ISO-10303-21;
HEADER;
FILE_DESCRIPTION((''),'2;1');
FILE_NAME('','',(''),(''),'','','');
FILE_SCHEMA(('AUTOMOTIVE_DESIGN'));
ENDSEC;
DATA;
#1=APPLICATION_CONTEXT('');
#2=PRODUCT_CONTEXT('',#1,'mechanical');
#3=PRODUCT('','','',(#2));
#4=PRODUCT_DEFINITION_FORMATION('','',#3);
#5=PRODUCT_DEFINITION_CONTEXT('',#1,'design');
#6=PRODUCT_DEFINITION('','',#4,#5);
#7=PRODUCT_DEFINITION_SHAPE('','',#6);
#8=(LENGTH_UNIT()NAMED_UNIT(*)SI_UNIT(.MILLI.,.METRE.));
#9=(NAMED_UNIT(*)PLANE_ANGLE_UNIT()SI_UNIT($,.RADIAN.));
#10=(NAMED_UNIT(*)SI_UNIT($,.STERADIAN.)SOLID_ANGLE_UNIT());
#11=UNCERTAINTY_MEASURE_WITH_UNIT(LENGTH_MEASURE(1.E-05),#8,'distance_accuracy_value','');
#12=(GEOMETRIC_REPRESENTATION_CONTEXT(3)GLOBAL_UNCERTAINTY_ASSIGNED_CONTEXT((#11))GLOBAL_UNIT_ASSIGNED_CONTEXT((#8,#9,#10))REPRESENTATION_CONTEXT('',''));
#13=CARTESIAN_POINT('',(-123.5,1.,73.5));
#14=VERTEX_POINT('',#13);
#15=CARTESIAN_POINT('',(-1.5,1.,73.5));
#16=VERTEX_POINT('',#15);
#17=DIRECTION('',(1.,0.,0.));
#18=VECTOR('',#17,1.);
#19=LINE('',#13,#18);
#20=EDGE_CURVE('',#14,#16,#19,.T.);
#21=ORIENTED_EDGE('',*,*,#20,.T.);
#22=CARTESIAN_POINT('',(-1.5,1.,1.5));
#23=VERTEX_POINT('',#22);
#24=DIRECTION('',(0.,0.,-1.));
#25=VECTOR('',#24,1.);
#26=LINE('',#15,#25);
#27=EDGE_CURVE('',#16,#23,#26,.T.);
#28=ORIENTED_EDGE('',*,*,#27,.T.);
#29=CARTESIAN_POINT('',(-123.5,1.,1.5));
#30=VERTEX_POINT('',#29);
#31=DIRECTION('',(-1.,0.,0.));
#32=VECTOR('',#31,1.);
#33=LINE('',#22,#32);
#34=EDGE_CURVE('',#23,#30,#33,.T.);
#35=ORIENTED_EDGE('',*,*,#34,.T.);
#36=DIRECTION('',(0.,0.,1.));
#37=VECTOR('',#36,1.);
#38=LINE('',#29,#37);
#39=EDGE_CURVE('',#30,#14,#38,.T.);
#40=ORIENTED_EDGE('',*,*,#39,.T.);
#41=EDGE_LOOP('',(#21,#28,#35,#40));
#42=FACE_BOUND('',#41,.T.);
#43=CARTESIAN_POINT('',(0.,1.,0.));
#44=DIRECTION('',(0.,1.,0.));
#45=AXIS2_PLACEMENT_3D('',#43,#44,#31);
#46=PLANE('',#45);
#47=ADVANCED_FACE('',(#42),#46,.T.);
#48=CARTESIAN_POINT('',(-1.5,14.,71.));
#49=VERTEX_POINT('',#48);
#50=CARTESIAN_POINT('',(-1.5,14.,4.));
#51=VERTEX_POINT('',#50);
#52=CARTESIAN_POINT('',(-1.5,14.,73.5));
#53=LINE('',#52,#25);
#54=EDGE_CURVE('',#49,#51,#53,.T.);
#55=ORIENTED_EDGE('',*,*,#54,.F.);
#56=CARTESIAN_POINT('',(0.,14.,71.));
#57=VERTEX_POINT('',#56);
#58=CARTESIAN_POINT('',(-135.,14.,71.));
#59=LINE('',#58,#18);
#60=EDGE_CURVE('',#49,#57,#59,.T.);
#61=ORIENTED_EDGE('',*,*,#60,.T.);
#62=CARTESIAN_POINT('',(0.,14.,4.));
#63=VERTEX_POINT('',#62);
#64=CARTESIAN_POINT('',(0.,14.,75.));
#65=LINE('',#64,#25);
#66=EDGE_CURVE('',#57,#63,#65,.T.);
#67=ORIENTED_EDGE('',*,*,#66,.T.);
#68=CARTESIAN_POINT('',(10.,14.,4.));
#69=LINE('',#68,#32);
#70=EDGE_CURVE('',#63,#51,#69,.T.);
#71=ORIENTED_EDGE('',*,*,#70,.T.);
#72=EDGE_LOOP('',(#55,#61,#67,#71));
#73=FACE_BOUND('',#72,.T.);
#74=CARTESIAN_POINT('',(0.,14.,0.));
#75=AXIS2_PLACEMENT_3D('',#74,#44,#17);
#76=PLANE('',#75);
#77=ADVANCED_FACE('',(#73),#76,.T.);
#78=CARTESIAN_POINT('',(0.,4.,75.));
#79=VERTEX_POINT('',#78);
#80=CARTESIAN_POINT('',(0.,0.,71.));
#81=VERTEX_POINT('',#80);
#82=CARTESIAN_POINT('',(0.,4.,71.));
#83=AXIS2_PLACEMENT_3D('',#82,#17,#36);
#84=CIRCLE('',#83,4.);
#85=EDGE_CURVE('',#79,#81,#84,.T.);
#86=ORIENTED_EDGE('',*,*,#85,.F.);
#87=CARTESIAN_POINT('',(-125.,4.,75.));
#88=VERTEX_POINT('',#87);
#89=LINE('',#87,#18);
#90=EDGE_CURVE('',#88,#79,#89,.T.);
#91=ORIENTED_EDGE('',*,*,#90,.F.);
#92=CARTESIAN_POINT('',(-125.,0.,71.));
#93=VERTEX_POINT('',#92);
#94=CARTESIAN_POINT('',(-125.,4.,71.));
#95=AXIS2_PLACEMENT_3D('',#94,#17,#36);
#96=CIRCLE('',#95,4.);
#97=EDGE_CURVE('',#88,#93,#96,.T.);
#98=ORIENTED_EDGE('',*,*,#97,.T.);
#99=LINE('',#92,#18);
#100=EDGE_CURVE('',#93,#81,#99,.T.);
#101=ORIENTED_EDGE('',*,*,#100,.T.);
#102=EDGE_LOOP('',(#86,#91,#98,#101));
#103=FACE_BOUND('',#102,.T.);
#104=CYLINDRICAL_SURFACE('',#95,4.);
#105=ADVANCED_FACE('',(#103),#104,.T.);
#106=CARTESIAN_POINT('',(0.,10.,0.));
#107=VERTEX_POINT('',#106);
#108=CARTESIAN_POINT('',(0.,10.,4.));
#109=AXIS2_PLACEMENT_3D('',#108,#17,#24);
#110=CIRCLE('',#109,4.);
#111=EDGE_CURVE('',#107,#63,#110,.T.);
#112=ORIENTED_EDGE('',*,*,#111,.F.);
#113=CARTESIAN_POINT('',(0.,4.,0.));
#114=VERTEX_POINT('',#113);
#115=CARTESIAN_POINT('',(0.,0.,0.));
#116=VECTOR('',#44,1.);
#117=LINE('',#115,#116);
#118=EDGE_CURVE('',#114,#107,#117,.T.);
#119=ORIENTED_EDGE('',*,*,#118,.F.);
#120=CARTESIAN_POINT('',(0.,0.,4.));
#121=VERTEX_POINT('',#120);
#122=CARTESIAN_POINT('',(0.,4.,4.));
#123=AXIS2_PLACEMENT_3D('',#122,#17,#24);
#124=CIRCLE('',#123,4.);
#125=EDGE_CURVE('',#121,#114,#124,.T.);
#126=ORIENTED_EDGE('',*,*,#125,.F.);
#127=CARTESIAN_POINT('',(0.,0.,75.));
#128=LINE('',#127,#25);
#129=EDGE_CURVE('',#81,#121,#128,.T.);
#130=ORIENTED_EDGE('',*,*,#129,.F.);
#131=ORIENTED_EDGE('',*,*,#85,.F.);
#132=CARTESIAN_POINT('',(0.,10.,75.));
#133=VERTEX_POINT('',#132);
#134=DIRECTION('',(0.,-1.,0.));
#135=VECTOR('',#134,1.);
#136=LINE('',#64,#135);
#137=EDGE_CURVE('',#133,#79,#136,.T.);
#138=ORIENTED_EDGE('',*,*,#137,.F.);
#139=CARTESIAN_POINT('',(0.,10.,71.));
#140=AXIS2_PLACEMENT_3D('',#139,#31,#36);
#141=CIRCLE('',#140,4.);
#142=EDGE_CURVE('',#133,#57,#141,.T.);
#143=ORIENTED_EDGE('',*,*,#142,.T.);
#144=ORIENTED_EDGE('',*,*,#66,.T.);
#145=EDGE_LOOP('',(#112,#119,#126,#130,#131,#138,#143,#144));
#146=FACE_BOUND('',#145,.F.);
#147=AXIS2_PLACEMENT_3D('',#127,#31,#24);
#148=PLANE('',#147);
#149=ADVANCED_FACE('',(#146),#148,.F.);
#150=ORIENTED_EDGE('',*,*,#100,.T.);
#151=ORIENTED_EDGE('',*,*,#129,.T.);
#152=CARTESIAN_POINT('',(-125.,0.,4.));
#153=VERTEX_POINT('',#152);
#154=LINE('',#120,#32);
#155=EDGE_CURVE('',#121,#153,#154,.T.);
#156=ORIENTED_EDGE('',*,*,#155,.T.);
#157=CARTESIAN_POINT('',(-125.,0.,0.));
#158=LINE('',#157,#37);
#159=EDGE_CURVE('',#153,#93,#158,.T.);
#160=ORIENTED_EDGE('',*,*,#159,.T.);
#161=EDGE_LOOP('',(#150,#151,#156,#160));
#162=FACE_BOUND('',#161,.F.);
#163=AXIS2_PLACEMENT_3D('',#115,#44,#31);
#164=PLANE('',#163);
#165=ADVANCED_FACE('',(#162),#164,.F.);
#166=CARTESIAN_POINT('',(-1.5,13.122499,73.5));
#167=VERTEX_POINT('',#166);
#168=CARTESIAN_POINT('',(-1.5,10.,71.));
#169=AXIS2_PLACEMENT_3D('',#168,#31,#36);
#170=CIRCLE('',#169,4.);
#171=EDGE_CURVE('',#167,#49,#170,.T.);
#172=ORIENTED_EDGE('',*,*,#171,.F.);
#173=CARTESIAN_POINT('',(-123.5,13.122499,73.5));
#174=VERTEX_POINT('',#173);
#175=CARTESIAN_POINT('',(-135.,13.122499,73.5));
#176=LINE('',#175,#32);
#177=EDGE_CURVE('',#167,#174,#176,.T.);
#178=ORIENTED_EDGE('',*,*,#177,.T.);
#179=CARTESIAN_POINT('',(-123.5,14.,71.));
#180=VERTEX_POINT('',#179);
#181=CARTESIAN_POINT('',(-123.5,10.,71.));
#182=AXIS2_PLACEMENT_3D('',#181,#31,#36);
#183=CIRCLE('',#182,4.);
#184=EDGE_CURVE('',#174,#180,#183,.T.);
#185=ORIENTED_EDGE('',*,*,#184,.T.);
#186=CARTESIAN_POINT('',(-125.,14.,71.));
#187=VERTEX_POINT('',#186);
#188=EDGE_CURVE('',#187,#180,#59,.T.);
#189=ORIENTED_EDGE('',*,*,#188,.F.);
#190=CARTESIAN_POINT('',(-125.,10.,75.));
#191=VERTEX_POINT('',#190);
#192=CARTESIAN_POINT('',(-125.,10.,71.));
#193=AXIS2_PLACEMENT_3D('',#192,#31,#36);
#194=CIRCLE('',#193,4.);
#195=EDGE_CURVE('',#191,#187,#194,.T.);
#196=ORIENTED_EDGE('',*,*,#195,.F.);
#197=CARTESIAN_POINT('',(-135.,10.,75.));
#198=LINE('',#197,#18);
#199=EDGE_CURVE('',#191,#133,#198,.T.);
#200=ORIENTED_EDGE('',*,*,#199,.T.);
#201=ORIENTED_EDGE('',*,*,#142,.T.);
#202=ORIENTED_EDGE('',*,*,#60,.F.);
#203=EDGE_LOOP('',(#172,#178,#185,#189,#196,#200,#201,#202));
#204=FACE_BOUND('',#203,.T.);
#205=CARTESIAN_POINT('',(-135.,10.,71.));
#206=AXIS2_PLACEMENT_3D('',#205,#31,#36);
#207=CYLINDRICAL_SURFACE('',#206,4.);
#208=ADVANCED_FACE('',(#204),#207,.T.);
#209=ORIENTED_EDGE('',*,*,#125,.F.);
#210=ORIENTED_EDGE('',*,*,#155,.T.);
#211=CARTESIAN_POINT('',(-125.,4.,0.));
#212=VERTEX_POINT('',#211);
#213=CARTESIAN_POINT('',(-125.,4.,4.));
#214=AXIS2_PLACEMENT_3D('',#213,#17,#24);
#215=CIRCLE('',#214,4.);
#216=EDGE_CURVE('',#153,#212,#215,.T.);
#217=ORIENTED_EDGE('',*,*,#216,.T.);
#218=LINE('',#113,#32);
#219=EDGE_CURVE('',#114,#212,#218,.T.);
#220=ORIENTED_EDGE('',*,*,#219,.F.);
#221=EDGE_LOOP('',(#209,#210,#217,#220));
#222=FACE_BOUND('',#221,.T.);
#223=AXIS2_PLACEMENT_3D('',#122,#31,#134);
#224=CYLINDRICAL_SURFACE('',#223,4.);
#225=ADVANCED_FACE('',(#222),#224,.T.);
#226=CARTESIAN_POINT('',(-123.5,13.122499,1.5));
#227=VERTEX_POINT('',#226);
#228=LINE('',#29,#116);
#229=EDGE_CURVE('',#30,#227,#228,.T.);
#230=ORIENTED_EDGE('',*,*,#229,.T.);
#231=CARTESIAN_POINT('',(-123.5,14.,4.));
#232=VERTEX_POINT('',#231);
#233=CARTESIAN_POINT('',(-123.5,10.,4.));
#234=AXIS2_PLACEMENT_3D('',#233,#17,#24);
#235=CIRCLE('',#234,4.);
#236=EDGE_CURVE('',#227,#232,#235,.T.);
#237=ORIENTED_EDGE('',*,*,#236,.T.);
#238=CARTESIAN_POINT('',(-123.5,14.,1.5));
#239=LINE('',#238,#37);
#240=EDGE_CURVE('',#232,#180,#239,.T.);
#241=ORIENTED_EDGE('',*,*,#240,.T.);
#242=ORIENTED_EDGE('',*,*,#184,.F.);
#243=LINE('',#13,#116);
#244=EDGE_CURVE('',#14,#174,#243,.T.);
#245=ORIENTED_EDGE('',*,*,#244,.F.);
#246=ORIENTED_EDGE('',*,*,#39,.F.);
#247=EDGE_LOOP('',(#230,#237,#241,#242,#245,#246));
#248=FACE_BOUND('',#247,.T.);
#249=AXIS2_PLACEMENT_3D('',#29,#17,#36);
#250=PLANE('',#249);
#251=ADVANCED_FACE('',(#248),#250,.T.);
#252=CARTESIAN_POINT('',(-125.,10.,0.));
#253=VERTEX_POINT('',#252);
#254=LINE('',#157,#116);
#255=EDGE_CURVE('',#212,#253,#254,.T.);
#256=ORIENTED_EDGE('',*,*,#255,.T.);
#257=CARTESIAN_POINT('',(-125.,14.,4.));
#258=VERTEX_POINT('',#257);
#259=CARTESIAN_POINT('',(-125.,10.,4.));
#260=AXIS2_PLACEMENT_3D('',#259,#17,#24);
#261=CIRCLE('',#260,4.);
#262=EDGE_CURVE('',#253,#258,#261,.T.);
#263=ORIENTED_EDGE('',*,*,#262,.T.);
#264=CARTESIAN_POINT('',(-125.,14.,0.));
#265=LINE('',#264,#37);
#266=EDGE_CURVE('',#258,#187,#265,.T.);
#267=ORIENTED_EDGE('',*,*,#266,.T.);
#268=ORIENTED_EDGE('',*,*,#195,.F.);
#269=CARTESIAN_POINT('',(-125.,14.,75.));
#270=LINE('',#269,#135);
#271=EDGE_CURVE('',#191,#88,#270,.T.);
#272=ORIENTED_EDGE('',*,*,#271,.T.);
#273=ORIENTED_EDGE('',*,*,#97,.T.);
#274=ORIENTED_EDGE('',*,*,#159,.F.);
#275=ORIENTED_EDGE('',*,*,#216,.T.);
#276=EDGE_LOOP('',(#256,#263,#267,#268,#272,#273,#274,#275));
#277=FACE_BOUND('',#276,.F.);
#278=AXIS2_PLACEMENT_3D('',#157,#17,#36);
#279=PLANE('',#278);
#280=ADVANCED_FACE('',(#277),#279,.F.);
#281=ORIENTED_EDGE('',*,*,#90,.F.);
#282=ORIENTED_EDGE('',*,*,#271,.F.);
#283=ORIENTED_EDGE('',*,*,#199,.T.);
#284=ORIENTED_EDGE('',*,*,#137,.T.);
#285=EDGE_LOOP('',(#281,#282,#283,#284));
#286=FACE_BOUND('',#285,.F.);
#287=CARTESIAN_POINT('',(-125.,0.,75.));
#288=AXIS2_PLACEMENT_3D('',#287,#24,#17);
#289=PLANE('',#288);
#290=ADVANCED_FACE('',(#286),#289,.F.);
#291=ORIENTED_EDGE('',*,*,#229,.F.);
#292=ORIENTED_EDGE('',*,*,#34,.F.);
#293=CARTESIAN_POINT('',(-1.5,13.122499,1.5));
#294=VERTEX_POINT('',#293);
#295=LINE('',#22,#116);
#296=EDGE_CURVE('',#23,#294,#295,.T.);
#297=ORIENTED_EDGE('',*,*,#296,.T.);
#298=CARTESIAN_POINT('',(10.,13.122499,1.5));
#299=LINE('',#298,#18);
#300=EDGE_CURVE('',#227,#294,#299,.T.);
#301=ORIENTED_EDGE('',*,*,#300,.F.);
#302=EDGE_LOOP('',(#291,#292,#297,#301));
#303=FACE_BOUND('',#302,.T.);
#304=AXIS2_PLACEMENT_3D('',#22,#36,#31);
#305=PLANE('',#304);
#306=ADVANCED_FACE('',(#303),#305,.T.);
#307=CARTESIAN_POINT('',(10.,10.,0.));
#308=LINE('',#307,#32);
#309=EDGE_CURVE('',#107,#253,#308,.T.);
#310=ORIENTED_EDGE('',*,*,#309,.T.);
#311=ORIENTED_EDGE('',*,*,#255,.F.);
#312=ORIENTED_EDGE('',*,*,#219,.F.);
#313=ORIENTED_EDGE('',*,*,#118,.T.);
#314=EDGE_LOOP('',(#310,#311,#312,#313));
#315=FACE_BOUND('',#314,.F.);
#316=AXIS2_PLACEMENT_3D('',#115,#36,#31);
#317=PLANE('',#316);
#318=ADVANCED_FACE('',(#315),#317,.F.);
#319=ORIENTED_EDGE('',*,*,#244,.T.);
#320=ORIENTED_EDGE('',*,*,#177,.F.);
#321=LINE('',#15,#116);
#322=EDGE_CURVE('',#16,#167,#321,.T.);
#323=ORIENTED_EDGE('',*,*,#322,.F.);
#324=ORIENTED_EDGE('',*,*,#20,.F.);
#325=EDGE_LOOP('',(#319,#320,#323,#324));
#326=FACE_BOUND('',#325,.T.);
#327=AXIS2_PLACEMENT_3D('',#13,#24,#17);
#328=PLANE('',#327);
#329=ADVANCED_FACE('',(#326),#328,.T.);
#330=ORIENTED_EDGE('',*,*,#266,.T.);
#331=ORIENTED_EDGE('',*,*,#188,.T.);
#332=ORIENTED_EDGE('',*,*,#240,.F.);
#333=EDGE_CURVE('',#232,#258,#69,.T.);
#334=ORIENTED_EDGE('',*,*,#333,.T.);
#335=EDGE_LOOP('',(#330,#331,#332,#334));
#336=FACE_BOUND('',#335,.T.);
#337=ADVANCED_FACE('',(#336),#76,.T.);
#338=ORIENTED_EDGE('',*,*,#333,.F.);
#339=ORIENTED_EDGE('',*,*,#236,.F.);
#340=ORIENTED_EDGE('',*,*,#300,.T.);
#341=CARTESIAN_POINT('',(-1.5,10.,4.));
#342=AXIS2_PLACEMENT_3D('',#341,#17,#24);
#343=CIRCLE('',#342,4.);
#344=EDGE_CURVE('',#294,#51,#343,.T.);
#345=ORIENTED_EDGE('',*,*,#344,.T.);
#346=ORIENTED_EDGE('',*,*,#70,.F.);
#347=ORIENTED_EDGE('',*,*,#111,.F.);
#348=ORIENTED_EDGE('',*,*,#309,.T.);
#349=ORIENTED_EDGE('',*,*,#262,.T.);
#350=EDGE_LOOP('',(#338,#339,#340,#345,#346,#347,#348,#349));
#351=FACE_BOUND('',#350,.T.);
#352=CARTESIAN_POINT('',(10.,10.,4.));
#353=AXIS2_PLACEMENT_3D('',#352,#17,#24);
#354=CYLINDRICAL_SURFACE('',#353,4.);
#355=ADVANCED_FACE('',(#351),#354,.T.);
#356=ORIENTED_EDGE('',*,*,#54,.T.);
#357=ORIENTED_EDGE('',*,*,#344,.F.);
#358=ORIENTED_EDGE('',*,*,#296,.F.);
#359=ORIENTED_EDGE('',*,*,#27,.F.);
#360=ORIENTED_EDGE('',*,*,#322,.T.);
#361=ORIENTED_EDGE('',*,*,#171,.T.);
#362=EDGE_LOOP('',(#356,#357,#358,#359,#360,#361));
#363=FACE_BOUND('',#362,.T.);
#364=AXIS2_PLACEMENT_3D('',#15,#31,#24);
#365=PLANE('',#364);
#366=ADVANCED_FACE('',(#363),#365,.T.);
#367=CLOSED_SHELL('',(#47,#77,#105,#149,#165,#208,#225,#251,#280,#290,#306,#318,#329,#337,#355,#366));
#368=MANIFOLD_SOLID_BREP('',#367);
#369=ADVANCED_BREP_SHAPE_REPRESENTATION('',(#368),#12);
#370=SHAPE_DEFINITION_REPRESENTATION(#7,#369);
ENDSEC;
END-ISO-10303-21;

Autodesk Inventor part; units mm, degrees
ref_plane "YZ Plane" through (0, 0, 0) normal (1, 0, 0) x (0, 1, 0)
ref_plane "XZ Plane" through (0, 0, 0) normal (0, 1, 0) x (-1, 0, 0)
ref_plane "XY Plane" through (0, 0, 0) normal (0, 0, 1) x (1, 0, 0)
sketch "Sketch1" plane through (0, 0, 0) normal (0, 1, 0) x (-1, 0, 0)
  line L0 (0, 0) -> (125, 0)
  line L1 (125, 0) -> (125, 75)
  line L2 (125, 75) -> (0, 75)
  line L3 (0, 75) -> (0, 0)
  dimension "d0" = 125
  dimension "d1" = 75
extrude "Extrusion1" add sketch "Sketch1" along normal blind 1
sketch "Sketch2" plane through (0, 1, 0) normal (0, 1, 0) x (1, 0, 0)
  point P0 (0, 0)
sketch "Sketch3" plane through (0, 1, 0) normal (0, 1, 0) x (1, 0, 0)
  point P0 (0, 0)
sketch "Sketch4" plane through (0, 1, 0) normal (0, 1, 0) x (1, 0, 0)
  line L0 (-125, -75) -> (0, -75) projected
  line L1 (-125, -75) -> (0, -75)
  line L2 (0, -75) -> (0, 0)
  line L3 (0, 0) -> (-125, 0)
  line L4 (-125, 0) -> (-125, -75)
  line L5 (-123.5, -73.5) -> (-1.5, -73.5)
  line L6 (-1.5, -73.5) -> (-1.5, -1.5)
  line L7 (-1.5, -1.5) -> (-123.5, -1.5)
  line L8 (-123.5, -1.5) -> (-123.5, -73.5)
  dimension "d4" = 1.5
  dimension "d5" = 1.5
  dimension "d6" = 122
  dimension "d7" = 72
extrude "Extrusion2" add sketch "Sketch4" along normal blind 13
fillet "Fillet1" radius 4 1 edges at (-62.5, 14, 75)
fillet "Fillet2" radius 4 1 edges at (-62.5, 14, 0)
fillet "Fillet3" radius 4 1 edges at (-62.5, 0, 75)
fillet "Fillet4" radius 4 1 edges at (-62.5, 0, 0)
properties part number "Raspberry Pi Phone Test"
